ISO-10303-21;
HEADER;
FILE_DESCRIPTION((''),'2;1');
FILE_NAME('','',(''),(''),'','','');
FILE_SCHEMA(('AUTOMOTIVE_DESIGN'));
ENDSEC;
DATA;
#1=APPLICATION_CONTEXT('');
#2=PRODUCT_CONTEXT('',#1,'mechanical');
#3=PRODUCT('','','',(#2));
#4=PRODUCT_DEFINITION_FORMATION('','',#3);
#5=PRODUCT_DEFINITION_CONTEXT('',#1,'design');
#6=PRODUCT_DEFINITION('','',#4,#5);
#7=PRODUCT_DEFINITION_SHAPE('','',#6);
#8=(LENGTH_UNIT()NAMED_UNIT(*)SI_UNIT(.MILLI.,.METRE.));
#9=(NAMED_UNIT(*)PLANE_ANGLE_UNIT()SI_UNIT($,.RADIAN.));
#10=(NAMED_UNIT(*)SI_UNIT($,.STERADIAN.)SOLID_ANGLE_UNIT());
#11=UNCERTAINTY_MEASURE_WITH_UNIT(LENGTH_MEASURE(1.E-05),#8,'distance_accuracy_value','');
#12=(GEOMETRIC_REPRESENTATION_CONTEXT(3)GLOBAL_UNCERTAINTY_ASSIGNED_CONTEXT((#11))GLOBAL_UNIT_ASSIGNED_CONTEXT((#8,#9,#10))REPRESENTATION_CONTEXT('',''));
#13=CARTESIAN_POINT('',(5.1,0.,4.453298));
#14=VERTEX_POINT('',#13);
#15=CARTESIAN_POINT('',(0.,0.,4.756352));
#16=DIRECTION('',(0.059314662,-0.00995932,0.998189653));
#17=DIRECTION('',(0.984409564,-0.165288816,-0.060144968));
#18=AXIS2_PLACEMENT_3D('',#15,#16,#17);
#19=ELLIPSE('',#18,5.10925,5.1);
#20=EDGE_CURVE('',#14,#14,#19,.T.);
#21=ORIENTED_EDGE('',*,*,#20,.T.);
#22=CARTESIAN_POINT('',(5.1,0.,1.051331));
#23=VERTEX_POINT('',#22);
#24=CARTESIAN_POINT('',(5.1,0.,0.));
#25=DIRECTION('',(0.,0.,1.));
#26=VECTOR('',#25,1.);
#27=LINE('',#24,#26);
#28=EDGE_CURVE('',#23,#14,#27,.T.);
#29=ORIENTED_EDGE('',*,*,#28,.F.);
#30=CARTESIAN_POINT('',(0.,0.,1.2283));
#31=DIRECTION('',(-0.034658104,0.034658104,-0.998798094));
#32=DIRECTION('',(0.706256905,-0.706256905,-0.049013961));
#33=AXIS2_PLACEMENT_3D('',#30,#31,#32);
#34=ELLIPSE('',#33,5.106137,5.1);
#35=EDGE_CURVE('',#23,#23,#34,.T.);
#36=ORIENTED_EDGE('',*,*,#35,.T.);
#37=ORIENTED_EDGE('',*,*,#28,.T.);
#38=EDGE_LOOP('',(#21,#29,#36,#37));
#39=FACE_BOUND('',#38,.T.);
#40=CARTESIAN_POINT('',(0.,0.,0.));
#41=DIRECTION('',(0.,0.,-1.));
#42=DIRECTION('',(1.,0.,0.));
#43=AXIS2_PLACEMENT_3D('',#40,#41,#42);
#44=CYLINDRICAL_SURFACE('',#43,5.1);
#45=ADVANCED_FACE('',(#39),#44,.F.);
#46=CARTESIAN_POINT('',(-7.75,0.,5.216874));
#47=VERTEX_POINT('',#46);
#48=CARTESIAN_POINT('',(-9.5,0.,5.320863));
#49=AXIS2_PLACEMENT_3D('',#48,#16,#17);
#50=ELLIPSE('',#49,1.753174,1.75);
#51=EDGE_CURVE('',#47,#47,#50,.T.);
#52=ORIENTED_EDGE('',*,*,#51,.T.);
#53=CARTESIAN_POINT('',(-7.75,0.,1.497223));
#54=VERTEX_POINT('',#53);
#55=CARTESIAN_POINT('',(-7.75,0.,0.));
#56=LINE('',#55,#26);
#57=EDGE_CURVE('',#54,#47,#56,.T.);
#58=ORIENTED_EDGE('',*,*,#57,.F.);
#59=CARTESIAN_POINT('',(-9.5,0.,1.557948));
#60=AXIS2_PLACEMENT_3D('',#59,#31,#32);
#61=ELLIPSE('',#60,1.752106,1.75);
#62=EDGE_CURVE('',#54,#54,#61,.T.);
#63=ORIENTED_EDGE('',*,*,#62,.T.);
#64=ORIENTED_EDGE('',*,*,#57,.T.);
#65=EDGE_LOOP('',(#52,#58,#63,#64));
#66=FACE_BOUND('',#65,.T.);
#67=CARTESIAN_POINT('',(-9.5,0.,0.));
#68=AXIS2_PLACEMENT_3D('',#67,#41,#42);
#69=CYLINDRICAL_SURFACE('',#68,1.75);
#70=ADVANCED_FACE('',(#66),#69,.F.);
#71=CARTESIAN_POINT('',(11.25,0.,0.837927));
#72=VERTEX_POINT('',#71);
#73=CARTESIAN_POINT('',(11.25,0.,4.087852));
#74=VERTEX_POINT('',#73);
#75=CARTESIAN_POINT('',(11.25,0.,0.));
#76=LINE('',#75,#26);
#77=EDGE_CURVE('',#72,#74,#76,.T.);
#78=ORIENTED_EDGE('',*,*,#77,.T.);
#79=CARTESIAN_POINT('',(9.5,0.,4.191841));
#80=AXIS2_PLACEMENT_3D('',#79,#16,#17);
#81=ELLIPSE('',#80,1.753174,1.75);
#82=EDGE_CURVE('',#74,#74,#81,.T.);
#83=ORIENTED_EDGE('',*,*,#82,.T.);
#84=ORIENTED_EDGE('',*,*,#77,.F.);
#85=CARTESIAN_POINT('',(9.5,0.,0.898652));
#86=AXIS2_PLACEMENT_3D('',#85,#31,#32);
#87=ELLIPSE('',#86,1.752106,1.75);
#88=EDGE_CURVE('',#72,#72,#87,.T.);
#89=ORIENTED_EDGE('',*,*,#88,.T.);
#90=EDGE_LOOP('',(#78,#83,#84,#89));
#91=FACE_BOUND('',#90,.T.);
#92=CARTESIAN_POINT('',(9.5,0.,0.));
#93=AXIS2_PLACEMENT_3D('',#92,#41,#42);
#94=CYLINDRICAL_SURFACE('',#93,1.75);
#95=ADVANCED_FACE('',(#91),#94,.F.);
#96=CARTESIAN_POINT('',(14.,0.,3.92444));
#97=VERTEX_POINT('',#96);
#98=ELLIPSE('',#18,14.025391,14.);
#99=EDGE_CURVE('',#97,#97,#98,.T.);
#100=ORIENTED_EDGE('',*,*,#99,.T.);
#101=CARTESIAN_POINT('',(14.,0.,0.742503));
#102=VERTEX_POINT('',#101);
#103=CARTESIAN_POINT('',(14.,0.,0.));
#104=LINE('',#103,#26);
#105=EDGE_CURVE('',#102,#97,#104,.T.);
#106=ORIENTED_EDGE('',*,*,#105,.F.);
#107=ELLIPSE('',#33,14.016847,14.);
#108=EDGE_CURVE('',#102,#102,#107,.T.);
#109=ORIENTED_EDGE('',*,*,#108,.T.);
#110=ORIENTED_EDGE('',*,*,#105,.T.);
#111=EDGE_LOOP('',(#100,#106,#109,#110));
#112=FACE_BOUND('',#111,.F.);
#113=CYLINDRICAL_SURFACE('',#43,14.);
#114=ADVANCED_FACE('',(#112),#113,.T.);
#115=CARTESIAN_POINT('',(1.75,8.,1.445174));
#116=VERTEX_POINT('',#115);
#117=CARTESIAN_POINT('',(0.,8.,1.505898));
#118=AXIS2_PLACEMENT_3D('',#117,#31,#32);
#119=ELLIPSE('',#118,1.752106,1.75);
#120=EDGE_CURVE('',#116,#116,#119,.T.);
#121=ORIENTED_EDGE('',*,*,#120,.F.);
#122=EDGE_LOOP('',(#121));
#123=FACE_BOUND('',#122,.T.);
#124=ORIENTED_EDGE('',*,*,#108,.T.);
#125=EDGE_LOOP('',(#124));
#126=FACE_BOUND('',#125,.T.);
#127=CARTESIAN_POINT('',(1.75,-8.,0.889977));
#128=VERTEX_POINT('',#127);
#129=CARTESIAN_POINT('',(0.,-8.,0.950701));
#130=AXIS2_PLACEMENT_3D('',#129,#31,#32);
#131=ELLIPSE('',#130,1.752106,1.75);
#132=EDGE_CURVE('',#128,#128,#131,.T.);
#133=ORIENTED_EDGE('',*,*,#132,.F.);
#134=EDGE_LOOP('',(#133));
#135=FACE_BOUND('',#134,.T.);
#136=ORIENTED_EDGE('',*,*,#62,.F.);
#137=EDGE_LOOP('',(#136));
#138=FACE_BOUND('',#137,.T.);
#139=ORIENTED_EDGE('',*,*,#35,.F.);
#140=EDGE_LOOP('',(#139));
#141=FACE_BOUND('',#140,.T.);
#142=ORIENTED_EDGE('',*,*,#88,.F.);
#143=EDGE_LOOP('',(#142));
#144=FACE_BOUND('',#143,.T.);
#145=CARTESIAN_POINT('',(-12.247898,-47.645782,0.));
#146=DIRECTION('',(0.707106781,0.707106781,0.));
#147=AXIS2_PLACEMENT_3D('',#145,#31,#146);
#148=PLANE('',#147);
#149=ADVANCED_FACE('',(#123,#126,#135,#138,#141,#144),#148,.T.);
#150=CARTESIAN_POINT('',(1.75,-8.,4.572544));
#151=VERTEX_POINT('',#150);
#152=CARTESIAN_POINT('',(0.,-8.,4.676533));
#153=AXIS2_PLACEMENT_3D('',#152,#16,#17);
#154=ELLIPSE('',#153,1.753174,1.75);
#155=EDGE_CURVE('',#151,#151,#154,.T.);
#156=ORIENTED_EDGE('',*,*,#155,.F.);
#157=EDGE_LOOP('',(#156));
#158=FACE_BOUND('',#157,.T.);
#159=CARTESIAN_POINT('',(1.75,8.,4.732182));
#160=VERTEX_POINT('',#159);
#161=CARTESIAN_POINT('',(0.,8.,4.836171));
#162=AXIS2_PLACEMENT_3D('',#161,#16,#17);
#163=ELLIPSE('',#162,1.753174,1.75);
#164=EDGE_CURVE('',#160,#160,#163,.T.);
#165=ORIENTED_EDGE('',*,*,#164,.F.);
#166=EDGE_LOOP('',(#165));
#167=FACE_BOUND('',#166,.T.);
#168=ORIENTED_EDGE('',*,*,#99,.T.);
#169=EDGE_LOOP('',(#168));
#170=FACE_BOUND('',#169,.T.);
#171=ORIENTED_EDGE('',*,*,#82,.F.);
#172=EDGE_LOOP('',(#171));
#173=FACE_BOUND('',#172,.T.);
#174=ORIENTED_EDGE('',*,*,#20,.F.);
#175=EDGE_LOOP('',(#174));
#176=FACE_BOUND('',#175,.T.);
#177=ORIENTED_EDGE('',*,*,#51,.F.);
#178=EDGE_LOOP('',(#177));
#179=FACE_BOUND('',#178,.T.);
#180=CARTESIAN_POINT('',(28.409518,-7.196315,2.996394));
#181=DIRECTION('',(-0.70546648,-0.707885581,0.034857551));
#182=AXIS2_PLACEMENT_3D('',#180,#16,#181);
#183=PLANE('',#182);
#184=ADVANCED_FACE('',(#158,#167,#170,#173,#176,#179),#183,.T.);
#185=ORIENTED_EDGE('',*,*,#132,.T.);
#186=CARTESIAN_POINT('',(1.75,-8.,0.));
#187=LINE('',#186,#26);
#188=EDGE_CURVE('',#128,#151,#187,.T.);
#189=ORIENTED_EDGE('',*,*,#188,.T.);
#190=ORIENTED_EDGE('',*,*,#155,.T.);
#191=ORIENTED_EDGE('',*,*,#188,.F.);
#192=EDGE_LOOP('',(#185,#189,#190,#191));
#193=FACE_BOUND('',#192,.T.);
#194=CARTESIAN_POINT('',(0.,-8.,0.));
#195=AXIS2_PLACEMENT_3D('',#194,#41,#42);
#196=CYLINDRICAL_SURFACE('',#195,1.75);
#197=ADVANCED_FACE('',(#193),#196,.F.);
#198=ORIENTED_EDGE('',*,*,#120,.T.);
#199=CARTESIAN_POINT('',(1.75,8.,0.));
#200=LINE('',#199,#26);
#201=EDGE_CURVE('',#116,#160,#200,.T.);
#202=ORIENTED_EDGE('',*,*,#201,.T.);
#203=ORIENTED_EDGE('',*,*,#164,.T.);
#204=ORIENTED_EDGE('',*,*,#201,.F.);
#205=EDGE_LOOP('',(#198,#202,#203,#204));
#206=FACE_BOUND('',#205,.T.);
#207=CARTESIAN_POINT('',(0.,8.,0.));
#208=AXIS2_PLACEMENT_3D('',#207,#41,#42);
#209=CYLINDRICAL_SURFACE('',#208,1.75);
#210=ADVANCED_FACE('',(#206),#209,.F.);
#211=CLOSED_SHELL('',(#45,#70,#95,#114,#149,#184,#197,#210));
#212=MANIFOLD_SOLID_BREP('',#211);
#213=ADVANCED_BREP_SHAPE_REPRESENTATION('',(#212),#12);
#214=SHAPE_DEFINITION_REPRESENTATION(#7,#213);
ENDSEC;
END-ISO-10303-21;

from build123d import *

# Parameters (mm, degrees)
F0_R     = 14
F0_R_2   = 1.75
F0_R_3   = 5.1
F1_DEPTH = 10
F6_DEPTH = 40


with BuildPart() as f1:
    # F0 (on Top) → F1 (new body)
    with BuildSketch(Plane.XY):
        Circle(F0_R)
        with Locations((0, -8)):
            Circle(F0_R_2, mode=Mode.SUBTRACT)
        with Locations((-9.5, 0)):
            Circle(F0_R_2, mode=Mode.SUBTRACT)
        Circle(F0_R_3, mode=Mode.SUBTRACT)
        with Locations((9.5, 0)):
            Circle(F0_R_2, mode=Mode.SUBTRACT)
        with Locations((0, 8)):
            Circle(F0_R_2, mode=Mode.SUBTRACT)
    extrude(amount=F1_DEPTH)

    # F5 (on face) → F6 (intersect)
    with BuildSketch(Plane(origin=(17.6564226245, -17.6564226245, -1.2253490154), x_dir=(0.7045622489, 0.7079556371, -0.0488963521), z_dir=(0.706256905, -0.706256905, -0.0490139606))):
        Polygon((-42.6054166353, 4.1487906781), (-42.3605061004, -0.8479598781), (14.9219552549, 1.9596804268), (14.7750896798, 4.9560833541), align=None)
        Polygon((14.7750896798, 4.9560833541), (14.9219552549, 1.9596804268), (100.7277084193, 6.1653602332), align=None)
    extrude(amount=-F6_DEPTH, mode=Mode.INTERSECT)


solid = f1.part
